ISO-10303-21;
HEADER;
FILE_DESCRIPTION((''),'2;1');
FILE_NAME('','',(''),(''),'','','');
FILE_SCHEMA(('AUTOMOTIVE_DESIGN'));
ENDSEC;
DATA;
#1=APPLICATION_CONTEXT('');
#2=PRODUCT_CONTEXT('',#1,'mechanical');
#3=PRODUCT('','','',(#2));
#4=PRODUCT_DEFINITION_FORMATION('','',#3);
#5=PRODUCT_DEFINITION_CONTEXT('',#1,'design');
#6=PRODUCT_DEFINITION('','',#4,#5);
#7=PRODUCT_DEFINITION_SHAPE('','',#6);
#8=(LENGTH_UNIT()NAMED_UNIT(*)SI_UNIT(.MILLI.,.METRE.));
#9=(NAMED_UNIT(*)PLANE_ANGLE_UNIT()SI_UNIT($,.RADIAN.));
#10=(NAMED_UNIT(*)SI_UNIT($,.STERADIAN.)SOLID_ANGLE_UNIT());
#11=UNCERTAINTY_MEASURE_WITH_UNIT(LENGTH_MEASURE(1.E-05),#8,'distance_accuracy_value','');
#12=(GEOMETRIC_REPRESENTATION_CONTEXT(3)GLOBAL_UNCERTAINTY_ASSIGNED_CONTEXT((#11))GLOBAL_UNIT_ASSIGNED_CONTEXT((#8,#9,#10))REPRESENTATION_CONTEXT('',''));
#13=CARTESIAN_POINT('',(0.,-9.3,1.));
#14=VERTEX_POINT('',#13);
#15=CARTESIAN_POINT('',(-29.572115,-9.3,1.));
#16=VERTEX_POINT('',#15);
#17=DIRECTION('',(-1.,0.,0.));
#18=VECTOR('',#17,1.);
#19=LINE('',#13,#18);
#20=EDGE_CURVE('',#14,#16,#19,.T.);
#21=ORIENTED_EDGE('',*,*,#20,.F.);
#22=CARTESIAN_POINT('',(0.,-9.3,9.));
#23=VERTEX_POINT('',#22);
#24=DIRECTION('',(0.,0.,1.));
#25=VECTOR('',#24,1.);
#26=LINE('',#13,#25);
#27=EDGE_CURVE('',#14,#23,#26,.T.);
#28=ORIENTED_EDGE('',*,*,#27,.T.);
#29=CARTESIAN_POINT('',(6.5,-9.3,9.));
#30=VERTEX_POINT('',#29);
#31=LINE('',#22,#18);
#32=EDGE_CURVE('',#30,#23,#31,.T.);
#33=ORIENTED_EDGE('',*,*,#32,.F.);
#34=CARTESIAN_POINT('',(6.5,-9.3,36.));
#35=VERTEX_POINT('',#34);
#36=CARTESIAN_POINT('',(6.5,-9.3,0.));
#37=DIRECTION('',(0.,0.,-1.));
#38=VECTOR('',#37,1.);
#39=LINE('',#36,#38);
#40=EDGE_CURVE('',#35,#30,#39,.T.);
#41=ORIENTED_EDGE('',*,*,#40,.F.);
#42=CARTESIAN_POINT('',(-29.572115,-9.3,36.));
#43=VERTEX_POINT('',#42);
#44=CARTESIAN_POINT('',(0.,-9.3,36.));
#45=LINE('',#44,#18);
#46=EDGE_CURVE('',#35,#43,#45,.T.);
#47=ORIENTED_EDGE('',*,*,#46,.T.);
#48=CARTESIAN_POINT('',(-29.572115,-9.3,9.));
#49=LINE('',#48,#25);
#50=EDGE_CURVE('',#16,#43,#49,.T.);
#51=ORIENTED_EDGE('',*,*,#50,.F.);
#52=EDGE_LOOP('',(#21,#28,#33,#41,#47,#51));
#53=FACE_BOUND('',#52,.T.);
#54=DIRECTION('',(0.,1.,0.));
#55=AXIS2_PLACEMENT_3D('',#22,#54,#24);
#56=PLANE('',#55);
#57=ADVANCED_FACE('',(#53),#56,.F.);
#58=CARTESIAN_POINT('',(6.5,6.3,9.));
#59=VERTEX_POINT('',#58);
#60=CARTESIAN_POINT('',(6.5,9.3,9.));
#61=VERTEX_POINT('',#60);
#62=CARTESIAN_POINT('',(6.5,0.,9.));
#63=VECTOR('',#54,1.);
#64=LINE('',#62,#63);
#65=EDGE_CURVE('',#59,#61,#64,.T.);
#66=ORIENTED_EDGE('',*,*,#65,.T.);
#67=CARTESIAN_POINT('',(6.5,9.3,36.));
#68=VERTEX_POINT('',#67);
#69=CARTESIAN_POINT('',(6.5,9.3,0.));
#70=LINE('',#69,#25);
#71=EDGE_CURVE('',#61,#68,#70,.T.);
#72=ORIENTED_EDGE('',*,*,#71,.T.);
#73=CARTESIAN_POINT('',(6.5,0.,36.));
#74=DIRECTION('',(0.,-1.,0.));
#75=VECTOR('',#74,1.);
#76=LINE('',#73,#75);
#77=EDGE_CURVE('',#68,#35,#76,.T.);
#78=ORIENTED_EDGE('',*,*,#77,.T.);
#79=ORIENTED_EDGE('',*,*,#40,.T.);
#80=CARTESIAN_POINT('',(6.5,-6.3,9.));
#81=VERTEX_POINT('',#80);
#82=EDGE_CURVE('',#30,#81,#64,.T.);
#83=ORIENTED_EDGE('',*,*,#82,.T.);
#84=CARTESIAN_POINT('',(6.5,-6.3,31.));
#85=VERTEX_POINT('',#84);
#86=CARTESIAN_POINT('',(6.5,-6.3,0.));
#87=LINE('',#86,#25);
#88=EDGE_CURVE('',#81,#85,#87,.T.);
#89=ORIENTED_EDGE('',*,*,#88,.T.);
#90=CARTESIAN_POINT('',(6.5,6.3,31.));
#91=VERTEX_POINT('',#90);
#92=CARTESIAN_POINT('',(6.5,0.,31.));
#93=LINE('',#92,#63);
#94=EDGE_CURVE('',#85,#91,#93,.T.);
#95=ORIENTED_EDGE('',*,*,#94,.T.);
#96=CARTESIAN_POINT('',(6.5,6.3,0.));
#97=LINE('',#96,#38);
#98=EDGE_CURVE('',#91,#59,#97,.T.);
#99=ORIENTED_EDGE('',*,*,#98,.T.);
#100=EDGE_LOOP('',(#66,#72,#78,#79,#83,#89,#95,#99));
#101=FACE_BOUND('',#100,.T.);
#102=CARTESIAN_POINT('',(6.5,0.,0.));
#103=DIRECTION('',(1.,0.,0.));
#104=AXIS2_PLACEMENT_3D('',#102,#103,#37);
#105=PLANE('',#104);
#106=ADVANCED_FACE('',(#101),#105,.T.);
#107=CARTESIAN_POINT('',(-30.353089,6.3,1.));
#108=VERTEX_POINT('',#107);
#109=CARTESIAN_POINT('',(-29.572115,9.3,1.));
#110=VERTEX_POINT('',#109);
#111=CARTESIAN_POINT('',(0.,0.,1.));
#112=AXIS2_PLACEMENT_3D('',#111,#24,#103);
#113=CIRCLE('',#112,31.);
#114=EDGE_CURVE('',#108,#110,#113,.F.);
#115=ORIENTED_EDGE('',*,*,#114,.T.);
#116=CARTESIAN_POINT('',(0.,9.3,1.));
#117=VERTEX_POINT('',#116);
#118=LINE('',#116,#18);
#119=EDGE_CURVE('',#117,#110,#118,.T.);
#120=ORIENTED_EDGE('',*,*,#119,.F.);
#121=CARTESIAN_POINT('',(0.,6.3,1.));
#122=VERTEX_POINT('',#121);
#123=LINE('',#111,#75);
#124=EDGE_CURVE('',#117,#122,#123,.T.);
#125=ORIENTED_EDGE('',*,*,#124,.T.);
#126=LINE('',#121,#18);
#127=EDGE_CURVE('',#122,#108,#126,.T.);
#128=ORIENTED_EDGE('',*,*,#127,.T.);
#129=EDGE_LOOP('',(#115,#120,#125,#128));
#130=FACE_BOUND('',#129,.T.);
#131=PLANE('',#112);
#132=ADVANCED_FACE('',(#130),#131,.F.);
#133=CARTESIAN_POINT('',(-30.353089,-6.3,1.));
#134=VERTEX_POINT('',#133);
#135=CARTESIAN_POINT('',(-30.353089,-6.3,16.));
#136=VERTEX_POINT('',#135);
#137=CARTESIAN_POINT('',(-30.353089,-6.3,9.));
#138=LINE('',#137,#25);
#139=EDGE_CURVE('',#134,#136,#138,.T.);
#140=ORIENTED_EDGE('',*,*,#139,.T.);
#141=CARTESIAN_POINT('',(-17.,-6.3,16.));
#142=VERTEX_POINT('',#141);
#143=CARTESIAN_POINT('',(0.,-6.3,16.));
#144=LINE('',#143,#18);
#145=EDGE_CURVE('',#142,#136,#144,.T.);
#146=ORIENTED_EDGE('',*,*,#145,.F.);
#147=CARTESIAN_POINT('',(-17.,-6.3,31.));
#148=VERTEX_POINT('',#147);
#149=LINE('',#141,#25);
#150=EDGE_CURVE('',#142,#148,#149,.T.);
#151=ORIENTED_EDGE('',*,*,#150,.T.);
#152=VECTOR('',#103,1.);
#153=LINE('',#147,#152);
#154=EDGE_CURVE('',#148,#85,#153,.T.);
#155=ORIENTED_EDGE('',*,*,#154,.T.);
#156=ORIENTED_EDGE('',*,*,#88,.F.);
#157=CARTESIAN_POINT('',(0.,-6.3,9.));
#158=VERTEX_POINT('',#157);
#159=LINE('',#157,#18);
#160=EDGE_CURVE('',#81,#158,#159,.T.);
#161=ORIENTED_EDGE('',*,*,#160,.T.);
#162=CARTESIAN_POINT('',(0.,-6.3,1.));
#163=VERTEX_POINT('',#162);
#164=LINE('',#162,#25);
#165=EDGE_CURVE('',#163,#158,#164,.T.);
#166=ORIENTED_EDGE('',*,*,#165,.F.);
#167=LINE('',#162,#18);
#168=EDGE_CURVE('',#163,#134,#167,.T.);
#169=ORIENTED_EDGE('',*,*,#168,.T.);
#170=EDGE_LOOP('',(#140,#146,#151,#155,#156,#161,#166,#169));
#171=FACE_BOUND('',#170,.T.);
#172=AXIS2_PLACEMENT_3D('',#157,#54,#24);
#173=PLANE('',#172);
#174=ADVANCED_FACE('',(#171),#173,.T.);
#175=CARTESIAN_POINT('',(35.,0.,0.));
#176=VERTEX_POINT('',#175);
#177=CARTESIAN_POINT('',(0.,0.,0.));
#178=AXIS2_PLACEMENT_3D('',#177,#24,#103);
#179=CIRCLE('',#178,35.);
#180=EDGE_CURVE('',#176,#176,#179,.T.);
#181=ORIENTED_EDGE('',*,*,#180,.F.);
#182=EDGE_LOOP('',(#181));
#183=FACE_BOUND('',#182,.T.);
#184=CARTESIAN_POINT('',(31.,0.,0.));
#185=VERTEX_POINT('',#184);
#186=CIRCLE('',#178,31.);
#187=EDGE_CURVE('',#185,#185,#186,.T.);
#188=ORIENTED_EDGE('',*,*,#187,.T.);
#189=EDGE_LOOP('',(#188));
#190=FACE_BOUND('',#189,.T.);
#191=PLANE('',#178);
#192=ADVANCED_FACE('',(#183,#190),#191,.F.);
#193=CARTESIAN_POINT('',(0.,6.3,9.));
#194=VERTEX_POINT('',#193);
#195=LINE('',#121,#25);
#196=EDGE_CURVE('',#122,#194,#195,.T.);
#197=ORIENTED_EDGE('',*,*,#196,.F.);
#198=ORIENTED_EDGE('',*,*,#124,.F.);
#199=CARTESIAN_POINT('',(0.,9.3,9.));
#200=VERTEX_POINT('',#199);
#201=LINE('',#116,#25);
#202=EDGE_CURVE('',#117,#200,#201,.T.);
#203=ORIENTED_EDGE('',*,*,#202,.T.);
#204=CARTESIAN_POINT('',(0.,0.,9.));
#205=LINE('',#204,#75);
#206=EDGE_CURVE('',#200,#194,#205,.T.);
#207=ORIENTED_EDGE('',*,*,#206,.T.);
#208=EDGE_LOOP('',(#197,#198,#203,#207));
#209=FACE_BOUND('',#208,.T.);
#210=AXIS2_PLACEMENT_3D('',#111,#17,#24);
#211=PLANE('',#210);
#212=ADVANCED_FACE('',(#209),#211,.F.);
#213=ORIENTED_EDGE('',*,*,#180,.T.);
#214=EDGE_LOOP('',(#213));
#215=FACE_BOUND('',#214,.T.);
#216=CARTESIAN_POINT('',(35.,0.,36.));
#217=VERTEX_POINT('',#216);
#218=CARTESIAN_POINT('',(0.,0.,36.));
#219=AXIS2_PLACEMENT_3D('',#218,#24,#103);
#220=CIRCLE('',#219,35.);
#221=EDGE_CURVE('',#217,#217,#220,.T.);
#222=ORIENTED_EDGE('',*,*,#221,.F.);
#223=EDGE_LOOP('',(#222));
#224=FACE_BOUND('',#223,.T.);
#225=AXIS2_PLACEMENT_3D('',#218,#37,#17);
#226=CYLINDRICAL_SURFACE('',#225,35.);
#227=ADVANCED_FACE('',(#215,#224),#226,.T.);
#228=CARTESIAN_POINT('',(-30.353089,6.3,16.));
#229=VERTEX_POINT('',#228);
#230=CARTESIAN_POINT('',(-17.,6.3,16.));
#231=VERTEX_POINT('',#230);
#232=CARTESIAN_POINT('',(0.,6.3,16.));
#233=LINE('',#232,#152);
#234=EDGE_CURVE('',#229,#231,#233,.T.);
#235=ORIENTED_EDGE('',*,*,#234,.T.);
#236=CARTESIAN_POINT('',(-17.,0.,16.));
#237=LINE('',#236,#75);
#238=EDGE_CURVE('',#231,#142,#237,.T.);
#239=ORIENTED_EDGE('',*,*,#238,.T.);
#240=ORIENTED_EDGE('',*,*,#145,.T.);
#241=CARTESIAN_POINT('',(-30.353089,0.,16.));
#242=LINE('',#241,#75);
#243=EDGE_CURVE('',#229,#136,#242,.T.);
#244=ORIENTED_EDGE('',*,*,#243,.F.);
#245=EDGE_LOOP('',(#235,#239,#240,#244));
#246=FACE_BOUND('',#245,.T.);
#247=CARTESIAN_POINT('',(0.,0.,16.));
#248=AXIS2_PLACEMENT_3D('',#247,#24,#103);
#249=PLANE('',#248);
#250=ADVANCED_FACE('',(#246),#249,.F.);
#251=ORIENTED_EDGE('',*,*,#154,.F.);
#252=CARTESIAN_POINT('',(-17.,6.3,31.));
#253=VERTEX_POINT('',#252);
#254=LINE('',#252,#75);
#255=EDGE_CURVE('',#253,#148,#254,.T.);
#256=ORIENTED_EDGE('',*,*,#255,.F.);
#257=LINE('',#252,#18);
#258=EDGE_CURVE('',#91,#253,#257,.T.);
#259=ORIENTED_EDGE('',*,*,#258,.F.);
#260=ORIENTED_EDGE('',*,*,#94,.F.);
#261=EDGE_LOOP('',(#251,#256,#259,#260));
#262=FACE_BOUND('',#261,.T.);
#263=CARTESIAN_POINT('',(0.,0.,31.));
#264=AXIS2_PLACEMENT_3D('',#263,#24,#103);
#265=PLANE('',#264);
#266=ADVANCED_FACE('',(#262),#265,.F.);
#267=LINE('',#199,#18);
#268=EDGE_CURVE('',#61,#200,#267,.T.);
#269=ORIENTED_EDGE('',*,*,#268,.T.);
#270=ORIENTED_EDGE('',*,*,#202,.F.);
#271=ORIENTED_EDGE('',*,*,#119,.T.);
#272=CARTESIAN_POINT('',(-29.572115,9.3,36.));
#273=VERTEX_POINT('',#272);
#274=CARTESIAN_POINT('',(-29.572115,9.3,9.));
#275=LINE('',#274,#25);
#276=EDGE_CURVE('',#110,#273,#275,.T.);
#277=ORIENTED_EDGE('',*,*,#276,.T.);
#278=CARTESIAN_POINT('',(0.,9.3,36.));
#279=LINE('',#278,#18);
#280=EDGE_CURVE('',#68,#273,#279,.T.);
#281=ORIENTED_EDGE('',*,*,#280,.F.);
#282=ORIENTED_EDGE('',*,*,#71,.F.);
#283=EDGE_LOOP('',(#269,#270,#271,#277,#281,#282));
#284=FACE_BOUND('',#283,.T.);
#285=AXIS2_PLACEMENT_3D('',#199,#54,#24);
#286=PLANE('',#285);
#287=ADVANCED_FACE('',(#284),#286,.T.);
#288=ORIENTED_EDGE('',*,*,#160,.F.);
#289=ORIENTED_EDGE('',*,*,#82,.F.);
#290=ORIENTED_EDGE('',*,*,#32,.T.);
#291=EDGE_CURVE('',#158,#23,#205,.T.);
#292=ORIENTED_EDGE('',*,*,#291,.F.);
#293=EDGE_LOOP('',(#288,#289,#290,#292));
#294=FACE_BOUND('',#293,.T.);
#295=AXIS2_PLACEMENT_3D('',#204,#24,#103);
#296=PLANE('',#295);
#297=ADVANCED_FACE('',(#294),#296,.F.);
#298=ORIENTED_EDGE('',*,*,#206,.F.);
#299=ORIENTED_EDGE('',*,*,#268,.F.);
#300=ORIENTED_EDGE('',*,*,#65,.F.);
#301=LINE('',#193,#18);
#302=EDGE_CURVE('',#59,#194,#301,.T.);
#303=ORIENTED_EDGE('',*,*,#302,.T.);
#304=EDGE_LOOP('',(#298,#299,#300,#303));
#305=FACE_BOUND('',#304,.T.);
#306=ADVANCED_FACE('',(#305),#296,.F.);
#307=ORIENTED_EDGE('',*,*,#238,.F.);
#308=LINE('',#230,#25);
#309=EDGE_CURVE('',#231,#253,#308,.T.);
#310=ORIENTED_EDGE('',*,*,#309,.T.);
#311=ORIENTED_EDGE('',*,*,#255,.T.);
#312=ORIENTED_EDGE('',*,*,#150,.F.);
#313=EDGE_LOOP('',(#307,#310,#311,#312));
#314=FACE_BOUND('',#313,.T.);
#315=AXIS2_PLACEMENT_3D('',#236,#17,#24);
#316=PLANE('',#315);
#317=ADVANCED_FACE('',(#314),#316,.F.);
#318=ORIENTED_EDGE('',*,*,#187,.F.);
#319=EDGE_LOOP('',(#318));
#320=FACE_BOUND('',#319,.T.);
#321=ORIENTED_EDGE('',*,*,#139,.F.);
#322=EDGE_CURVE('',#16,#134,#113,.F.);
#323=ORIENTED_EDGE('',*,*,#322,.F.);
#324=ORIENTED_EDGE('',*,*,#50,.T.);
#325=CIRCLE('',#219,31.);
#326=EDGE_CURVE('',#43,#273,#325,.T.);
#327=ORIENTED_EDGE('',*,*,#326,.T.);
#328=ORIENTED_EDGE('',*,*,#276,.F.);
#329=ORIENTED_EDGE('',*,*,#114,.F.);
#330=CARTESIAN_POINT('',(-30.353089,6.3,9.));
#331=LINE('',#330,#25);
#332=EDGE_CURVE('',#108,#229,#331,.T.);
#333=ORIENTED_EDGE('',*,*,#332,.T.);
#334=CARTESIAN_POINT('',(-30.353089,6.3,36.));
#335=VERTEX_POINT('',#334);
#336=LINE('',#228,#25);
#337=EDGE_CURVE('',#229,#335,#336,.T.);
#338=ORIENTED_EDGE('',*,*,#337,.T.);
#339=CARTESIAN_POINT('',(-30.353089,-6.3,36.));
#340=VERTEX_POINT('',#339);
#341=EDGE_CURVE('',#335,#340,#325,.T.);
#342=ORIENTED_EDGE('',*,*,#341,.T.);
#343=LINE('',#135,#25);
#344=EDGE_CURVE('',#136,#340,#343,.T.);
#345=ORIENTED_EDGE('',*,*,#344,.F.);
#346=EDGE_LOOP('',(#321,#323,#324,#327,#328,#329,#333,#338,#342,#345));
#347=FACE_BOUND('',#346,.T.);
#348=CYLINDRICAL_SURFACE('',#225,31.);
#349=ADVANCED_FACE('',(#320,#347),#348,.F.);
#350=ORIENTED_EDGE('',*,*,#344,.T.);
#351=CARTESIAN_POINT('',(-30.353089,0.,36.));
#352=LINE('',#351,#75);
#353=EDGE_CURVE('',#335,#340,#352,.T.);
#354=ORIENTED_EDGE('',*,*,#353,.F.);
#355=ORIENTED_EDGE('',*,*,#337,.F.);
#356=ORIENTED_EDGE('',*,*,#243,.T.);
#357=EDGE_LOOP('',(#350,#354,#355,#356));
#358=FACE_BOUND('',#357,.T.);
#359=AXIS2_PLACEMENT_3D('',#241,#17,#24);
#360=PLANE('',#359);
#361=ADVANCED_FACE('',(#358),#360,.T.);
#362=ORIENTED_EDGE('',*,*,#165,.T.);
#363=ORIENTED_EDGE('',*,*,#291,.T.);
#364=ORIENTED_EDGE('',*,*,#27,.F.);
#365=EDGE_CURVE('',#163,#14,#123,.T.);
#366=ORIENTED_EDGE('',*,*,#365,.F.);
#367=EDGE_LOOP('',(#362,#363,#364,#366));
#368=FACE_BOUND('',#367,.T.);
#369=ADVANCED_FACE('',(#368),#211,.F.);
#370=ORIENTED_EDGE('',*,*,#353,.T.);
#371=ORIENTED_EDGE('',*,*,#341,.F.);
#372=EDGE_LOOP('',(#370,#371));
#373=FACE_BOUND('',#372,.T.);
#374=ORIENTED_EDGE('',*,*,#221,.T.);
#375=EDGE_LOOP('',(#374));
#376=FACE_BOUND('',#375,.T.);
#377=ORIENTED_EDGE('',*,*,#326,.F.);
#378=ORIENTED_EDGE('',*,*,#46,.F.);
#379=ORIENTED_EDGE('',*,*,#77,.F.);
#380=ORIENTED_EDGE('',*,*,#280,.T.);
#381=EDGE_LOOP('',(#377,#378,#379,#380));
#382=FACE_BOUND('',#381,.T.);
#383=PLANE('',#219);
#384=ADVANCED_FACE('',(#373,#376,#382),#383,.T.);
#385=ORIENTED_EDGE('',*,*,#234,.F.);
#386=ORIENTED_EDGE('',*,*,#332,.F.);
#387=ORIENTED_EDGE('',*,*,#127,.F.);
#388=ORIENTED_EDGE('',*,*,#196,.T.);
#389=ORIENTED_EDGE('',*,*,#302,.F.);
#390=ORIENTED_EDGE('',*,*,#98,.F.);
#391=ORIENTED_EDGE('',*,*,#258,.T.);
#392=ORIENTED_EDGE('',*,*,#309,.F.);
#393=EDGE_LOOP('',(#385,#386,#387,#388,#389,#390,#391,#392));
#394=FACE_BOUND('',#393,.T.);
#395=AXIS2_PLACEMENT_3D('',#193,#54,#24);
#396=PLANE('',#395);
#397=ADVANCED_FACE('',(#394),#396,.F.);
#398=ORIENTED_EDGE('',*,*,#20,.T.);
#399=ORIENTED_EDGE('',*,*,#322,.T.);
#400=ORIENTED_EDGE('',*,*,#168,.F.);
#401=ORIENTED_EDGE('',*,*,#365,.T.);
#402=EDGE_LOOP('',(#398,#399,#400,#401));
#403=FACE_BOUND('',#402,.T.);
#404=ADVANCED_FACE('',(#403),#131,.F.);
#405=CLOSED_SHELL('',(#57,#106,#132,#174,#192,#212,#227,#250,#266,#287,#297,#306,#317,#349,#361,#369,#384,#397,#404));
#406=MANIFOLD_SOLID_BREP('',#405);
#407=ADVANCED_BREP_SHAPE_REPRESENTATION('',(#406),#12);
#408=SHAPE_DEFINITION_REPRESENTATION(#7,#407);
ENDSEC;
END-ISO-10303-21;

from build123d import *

# Parameters (mm, degrees)
SKETCH1_R           = 35
SKETCH1_R_2         = 31
BOSS_EXTRUDE1_DEPTH = 36
BOSS_EXTRUDE3_START = -27
BOSS_EXTRUDE3_DEPTH = 27
SKETCH7_W           = 13.353088805
SKETCH7_H           = 12.6
BOSS_EXTRUDE4_DEPTH = 20
SKETCH8_W           = 17
SKETCH8_H           = 12.6
BOSS_EXTRUDE5_DEPTH = 5
BOSS_EXTRUDE6_DEPTH = 6.5
BOSS_EXTRUDE2_START = -35
BOSS_EXTRUDE2_DEPTH = 35


# Read off the part's stored shape, not the designer's step: Boss-Extrude6
with BuildPart() as part:
    # Sketch1 → Boss-Extrude1 (new body)
    with BuildSketch(Plane.XY):
        Circle(SKETCH1_R)
        Circle(SKETCH1_R_2, mode=Mode.SUBTRACT)
    extrude(amount=BOSS_EXTRUDE1_DEPTH)

    # Sketch5 → Boss-Extrude3 (add)
    with BuildSketch(Plane.XY.offset(36).offset(BOSS_EXTRUDE3_START)):
        with BuildLine():
            Line((0, 6.3), (0, 9.3))
            Line((0, 9.3), (-29.572115244, 9.3))
            ThreePointArc((-29.572115244, 9.3), (-30.000125334, 7.809768238), (-30.353088805, 6.3))
            Line((-30.353088805, 6.3), (0, 6.3))
        make_face()
        with BuildLine():
            ThreePointArc((-30.353088805, -6.3), (-30.000125334, -7.809768238), (-29.572115244, -9.3))
            Line((-29.572115244, -9.3), (0, -9.3))
            Line((0, -9.3), (0, -6.3))
            Line((0, -6.3), (-30.353088805, -6.3))
        make_face()
    extrude(amount=BOSS_EXTRUDE3_DEPTH)

    # Sketch7 → Boss-Extrude4 (add)
    with BuildSketch(Plane.XY.offset(36)):
        with Locations((-23.676544402, 0)):
            Rectangle(SKETCH7_W, SKETCH7_H)
    extrude(amount=-BOSS_EXTRUDE4_DEPTH)

    # Sketch8 → Boss-Extrude5 (add)
    with BuildSketch(Plane.XY.offset(36)):
        with Locations((-8.5, 0)):
            Rectangle(SKETCH8_W, SKETCH8_H)
    extrude(amount=-BOSS_EXTRUDE5_DEPTH)

    # Boss-Extrude6 outline → Boss-Extrude6 (add)
    with BuildSketch(Plane(origin=(0, 0, 0), x_dir=(0, 0, -1), z_dir=(1, 0, 0))):
        Polygon((-31, 6.3), (-9, 6.3), (-9, 9.3), (-36, 9.3), (-36, -9.3), (-9, -9.3), (-9, -6.3), (-31, -6.3), align=None)
    extrude(amount=BOSS_EXTRUDE6_DEPTH)

    # Sketch2 → Boss-Extrude2 (add)
    with BuildSketch(Plane.XY.offset(36).offset(BOSS_EXTRUDE2_START)):
        with BuildLine():
            Line((0, -6.3), (-30.353088805, -6.3))
            ThreePointArc((-30.353088805, -6.3), (-30.000125334, -7.809768238), (-29.572115244, -9.3))
            Line((-29.572115244, -9.3), (0, -9.3))
            Line((0, -9.3), (0, -6.3))
        make_face()
        with BuildLine():
            Line((-30.353088805, 6.3), (0, 6.3))
            Line((0, 6.3), (0, 9.3))
            Line((0, 9.3), (-29.572115244, 9.3))
            ThreePointArc((-29.572115244, 9.3), (-30.000125334, 7.809768238), (-30.353088805, 6.3))
        make_face()
    extrude(amount=BOSS_EXTRUDE2_DEPTH)


solid = part.part
